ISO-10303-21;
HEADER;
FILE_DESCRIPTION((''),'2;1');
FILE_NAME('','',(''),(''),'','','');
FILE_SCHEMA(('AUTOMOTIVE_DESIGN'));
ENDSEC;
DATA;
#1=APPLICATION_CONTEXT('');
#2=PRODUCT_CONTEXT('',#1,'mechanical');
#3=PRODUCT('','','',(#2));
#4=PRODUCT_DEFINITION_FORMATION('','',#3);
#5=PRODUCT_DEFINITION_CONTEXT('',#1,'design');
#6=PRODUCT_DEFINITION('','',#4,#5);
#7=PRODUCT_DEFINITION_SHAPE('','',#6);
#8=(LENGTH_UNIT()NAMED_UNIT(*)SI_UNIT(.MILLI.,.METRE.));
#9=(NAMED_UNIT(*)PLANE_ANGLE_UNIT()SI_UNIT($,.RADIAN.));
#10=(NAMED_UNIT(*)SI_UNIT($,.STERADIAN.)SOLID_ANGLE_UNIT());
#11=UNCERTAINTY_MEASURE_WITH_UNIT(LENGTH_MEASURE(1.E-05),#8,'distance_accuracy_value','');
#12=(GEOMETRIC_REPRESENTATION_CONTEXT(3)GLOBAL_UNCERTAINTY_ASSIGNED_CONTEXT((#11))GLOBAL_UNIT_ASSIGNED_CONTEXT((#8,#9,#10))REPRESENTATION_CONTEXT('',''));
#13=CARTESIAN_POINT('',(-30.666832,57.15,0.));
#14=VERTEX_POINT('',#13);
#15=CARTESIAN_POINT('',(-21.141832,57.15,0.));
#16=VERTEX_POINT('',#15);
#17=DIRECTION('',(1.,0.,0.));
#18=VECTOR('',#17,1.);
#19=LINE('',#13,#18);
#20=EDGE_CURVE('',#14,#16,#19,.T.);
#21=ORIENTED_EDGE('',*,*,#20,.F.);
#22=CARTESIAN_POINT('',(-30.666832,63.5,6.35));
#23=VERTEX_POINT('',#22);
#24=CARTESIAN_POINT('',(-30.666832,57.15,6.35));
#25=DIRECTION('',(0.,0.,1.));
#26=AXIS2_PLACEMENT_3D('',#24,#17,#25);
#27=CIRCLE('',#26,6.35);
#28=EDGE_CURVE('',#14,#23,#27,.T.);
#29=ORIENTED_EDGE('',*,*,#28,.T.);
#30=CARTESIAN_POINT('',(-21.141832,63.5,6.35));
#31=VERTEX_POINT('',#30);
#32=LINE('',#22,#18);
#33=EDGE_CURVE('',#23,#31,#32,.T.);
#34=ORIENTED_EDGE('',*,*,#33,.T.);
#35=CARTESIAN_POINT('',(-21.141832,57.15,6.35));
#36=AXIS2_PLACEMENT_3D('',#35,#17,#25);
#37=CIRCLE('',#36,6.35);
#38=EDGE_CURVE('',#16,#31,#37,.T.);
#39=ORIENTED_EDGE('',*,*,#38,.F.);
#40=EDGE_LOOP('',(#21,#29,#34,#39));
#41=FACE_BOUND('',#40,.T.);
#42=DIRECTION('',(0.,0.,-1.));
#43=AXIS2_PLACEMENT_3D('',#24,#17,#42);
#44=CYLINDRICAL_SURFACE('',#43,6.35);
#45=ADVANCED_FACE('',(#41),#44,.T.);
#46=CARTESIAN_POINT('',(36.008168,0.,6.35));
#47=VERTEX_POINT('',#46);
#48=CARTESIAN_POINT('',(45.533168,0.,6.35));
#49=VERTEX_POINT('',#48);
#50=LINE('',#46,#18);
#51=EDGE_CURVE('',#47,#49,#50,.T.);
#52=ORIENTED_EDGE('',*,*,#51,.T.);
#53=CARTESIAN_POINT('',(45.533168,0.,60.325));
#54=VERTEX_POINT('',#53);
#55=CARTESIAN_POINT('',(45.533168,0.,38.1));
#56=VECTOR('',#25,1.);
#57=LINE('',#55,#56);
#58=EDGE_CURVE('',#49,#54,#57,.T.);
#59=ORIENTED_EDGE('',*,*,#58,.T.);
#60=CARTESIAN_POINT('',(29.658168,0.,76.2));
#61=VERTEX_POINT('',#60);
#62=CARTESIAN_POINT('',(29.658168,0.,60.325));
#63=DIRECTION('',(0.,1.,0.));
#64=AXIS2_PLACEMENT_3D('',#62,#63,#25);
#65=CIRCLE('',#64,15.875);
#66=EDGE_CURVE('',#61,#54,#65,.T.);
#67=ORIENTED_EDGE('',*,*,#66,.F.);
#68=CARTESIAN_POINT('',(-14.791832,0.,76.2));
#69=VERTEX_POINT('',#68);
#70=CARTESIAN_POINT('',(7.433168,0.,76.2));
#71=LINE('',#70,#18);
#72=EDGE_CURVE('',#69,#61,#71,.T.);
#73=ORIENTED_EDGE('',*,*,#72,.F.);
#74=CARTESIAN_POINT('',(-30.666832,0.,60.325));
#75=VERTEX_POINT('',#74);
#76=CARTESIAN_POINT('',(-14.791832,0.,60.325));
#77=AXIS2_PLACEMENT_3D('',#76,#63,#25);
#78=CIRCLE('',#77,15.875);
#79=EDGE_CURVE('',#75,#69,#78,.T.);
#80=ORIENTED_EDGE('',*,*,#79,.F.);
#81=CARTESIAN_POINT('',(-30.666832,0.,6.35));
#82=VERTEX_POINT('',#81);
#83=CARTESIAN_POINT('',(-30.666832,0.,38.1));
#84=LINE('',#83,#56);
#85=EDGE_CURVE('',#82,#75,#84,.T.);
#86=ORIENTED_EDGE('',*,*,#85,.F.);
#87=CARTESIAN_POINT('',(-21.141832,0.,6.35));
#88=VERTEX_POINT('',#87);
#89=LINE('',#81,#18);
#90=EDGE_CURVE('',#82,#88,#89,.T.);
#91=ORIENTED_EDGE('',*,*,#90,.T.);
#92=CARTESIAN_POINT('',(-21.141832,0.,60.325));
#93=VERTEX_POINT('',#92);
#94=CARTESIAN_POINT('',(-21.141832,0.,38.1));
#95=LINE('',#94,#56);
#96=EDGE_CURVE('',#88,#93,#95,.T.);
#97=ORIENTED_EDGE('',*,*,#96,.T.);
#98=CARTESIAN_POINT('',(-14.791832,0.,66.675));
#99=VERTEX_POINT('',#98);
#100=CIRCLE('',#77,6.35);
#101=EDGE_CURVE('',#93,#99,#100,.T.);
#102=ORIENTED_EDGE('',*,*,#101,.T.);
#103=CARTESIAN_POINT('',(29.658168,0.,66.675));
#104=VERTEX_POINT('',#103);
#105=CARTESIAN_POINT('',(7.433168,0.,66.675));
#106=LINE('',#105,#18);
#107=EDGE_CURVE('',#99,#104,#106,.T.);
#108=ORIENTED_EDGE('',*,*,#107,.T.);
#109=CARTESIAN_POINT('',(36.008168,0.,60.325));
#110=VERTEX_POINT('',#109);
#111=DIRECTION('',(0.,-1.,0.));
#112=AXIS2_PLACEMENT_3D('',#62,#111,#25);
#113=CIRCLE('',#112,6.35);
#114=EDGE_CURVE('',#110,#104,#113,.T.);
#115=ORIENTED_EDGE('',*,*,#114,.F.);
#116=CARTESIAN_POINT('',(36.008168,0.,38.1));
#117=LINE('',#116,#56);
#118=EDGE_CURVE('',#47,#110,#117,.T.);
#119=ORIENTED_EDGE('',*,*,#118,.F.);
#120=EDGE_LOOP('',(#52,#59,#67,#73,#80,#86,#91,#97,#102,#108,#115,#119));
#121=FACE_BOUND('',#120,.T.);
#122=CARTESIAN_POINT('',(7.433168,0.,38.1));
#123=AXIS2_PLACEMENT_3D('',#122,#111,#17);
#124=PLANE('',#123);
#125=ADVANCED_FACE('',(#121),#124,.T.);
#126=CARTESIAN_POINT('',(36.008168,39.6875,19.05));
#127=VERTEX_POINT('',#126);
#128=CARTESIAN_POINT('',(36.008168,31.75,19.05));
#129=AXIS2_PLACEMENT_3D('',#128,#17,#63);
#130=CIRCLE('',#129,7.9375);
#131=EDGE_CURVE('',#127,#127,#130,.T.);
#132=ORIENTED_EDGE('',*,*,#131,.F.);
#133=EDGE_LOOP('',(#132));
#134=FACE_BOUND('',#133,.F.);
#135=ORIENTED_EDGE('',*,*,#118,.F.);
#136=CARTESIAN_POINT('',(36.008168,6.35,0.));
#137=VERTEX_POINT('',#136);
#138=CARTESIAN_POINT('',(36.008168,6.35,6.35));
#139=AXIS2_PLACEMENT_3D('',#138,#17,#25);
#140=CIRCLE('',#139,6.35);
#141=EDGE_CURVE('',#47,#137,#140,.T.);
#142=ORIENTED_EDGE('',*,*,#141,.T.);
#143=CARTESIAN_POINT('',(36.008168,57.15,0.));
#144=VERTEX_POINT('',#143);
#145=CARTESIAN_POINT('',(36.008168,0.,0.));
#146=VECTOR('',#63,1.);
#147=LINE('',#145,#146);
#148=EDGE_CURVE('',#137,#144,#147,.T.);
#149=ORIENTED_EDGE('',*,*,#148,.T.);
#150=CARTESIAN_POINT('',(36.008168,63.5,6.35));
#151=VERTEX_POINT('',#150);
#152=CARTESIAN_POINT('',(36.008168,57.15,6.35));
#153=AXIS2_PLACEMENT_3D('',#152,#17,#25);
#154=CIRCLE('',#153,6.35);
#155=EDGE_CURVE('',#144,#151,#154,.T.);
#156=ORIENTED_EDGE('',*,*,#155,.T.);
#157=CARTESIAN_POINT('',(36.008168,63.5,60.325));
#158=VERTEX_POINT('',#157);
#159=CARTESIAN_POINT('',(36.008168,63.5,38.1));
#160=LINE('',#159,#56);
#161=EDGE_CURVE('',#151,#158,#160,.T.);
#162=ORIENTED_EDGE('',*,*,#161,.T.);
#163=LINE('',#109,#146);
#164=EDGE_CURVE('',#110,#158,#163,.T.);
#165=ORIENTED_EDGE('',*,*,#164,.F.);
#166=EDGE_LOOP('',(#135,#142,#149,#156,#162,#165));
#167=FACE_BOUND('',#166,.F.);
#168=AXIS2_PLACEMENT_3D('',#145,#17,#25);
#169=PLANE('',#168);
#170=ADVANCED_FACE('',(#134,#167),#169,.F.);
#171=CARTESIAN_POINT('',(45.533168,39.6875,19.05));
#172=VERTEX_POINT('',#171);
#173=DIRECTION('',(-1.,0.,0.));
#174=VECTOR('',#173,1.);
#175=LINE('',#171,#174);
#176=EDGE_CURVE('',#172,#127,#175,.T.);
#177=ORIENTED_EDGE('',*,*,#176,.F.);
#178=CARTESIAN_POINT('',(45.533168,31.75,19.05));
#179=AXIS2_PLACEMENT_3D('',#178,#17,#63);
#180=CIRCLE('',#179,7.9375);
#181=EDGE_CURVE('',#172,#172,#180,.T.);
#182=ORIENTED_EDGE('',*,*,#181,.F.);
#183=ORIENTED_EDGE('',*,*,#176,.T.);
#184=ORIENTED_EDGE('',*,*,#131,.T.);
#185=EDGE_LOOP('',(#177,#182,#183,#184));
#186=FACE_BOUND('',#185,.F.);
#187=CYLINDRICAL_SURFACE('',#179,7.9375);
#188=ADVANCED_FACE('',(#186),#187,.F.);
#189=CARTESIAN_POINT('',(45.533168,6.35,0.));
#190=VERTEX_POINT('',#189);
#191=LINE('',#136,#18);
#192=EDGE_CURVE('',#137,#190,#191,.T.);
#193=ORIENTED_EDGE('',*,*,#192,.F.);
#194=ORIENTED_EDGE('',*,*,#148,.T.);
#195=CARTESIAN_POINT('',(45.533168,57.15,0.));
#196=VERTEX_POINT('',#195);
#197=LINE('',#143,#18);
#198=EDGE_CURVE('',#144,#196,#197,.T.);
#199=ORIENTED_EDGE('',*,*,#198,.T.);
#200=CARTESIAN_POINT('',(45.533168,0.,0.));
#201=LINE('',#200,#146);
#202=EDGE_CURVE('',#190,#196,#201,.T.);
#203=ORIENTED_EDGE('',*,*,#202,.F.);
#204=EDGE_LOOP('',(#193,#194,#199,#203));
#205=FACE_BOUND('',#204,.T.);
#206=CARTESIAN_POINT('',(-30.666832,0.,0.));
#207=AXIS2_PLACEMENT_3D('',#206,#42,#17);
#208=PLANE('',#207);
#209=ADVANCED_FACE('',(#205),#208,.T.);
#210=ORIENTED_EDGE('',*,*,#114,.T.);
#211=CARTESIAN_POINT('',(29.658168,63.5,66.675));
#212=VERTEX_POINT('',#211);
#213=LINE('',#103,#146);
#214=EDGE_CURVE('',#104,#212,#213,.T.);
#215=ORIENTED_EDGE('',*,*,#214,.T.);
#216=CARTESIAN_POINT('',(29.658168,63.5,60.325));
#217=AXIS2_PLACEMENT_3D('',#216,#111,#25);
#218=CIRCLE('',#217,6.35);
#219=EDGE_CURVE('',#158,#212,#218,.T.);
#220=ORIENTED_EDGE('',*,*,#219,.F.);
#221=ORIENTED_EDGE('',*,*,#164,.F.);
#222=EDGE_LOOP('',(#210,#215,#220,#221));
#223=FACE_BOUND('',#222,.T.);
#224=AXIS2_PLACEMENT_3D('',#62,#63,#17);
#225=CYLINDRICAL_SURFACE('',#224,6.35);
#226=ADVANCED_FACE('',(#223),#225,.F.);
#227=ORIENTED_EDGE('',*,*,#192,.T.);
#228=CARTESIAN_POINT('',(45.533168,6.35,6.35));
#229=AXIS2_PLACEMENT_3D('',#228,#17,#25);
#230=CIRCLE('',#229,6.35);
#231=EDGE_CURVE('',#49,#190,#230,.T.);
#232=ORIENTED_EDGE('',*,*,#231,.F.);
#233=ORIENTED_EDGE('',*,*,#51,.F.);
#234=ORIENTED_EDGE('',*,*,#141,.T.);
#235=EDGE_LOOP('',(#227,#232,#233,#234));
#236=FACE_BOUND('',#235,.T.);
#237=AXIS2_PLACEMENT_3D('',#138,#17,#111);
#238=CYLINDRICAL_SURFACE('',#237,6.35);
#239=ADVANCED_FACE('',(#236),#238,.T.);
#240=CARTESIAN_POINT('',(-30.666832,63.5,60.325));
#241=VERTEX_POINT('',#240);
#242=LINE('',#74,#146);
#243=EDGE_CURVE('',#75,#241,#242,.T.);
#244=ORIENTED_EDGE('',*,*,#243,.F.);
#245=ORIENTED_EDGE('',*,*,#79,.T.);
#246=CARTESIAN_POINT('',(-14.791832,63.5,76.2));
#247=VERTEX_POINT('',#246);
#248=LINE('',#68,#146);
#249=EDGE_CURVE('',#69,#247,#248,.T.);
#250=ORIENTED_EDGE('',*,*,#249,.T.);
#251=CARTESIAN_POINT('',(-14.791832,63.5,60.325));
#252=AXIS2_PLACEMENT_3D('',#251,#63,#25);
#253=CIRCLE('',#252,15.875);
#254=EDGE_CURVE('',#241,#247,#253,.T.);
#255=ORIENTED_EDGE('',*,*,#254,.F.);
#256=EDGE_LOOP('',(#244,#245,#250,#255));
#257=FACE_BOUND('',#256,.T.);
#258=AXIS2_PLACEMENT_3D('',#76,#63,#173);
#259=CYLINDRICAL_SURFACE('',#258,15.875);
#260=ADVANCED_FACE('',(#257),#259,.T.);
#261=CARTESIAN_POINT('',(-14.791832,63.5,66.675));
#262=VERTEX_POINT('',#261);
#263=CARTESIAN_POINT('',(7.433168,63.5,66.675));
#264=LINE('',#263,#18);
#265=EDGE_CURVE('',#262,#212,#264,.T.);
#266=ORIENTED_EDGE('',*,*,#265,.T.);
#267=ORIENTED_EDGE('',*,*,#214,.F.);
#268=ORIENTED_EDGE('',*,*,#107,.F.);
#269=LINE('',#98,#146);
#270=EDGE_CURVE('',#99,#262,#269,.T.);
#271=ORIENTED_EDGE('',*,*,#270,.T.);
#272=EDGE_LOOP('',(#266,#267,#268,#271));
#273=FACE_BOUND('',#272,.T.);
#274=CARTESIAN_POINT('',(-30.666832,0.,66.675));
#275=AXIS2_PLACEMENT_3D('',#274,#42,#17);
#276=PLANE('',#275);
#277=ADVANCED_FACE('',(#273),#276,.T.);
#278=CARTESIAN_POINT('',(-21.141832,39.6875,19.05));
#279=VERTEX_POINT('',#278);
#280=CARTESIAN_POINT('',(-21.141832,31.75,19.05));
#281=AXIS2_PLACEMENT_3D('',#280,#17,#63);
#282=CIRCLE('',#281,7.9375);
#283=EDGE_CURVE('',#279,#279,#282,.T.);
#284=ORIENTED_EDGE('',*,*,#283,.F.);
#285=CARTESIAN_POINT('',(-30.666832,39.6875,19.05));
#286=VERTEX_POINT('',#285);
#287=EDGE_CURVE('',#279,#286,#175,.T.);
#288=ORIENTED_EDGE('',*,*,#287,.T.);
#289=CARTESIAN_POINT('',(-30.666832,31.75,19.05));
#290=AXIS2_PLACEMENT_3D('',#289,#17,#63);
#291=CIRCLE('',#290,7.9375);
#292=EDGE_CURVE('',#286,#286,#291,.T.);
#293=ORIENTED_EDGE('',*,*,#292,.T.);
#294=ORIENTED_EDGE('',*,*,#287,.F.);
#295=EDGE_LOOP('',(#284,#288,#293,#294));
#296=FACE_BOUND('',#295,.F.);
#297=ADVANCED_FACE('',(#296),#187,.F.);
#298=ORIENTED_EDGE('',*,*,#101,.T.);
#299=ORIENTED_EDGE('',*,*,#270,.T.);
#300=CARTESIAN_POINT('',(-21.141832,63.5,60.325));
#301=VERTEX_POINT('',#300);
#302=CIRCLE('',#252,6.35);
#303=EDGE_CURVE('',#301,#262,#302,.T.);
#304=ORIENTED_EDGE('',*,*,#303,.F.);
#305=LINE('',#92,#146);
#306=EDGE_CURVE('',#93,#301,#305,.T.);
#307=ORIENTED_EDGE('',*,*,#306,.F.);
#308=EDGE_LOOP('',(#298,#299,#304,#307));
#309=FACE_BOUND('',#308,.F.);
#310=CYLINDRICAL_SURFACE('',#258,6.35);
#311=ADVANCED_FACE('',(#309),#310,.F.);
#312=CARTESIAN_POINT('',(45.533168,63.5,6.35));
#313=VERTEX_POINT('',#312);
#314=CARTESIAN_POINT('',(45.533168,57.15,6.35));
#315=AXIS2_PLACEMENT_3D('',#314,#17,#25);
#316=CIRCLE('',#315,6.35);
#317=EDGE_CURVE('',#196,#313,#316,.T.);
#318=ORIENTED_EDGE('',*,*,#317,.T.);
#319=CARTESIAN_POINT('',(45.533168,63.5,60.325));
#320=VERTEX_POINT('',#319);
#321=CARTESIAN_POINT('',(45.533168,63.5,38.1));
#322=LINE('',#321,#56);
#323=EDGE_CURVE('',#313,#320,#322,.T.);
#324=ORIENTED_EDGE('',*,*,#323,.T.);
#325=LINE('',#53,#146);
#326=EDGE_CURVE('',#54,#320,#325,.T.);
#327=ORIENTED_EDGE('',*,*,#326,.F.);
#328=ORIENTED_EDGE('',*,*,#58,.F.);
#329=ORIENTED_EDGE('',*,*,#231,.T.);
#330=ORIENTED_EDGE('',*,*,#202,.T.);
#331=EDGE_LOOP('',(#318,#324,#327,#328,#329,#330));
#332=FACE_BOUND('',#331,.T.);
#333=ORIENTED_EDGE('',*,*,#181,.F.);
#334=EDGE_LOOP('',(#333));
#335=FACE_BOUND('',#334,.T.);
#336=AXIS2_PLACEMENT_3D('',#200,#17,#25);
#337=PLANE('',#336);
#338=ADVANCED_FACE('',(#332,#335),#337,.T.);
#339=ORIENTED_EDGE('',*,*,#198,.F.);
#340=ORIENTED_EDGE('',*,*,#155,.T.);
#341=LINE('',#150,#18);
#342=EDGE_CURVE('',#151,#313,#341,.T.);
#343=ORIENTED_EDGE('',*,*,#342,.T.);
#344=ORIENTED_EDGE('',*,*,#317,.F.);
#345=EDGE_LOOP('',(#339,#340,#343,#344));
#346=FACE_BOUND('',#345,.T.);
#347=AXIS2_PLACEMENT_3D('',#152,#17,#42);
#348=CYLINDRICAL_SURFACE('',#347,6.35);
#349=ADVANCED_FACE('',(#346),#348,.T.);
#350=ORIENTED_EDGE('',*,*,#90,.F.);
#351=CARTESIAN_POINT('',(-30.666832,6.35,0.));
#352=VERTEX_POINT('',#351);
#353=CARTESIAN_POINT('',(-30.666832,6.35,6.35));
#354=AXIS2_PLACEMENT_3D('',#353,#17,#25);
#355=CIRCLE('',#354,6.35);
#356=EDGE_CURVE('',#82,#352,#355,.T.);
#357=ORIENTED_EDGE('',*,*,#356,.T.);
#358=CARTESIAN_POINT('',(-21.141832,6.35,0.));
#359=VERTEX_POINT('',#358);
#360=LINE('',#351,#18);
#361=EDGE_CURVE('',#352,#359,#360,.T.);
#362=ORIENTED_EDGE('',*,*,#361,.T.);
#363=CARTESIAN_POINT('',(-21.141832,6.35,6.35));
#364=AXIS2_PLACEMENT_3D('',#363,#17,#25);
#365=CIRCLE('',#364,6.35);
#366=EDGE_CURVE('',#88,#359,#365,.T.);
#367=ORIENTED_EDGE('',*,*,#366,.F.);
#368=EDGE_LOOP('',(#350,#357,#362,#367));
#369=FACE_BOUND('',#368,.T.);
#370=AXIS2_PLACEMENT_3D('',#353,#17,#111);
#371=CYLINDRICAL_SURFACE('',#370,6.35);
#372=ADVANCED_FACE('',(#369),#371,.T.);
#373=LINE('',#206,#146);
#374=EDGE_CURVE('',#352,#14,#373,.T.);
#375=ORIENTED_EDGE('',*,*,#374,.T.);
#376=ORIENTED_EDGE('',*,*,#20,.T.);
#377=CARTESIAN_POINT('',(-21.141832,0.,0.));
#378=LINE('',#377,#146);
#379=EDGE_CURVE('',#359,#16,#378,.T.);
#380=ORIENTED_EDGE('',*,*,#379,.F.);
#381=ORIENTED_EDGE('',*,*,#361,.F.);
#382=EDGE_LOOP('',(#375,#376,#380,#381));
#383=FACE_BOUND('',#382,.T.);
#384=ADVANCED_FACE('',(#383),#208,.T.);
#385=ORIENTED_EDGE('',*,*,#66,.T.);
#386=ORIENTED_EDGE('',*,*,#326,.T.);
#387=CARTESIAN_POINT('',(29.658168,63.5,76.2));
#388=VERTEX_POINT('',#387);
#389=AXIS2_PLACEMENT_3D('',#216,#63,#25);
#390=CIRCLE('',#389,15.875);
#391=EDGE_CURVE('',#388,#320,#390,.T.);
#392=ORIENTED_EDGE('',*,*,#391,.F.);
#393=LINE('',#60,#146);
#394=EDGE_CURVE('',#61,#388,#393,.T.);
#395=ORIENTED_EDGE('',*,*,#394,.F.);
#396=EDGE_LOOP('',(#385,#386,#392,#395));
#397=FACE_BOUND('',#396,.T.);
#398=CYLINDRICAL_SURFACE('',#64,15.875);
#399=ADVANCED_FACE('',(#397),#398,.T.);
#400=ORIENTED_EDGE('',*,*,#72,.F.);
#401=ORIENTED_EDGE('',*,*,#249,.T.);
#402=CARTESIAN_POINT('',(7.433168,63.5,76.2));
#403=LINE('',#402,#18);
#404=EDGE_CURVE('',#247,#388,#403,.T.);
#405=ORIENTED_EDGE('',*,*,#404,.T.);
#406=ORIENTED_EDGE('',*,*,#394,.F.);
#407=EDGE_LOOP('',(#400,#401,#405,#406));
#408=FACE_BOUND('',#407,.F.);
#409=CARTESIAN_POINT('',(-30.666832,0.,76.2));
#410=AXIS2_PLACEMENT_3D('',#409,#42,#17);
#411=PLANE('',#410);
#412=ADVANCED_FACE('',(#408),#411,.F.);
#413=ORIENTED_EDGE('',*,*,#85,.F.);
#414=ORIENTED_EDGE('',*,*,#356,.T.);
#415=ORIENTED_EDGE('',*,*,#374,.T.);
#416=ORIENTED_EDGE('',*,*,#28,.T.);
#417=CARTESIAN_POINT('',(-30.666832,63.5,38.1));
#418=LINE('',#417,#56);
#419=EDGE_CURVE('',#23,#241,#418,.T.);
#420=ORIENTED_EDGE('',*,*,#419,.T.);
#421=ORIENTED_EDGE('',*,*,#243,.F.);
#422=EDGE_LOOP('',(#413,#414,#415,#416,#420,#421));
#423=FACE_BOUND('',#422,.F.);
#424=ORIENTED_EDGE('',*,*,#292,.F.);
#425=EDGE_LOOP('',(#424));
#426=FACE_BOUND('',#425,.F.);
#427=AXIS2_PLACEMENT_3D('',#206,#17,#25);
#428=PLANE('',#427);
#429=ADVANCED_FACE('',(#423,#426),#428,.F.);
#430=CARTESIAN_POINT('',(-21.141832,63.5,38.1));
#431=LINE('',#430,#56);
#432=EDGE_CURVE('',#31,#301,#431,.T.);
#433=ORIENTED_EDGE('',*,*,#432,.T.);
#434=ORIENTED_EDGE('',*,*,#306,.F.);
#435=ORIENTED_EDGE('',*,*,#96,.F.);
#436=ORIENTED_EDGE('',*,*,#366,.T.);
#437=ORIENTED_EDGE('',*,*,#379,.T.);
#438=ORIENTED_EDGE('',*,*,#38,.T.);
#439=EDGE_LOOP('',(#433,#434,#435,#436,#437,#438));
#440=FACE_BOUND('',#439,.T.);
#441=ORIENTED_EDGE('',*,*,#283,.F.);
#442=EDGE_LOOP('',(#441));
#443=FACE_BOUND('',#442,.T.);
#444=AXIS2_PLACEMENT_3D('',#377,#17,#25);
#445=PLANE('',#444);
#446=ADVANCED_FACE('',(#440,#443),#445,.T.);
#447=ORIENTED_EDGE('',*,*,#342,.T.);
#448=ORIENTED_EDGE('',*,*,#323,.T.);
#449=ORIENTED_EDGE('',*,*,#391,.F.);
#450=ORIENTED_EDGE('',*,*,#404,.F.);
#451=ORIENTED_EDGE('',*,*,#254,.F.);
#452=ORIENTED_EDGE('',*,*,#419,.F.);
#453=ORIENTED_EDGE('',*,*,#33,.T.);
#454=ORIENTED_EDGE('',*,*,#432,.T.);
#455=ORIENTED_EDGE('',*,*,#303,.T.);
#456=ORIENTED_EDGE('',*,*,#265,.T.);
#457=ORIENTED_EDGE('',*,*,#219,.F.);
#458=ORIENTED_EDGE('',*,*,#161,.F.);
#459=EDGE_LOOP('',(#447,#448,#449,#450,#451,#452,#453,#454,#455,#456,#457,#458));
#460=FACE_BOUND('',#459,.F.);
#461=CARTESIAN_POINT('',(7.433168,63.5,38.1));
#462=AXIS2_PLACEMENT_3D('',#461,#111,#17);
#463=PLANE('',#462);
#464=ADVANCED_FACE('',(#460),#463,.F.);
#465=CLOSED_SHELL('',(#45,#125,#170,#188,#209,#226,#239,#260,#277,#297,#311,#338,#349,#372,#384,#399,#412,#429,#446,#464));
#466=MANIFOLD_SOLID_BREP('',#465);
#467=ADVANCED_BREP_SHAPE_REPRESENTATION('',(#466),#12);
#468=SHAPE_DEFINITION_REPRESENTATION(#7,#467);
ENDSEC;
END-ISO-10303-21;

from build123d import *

# Parameters (mm, degrees)
F0_W     = 76.2
F0_H     = 76.2
F1_DEPTH = 63.5
F2_T     = -9.525
F3_R     = 6.35
F4_R     = 15.875
F5_R     = 7.9375
F6_DEPTH = 76.201
F7_R     = 6.35


with BuildPart() as f1:
    # F0 (on Front) → F1 (new body)
    with BuildSketch(Plane.XZ):
        with Locations((7.4331681192, 38.1)):
            Rectangle(F0_W, F0_H)
    extrude(amount=-F1_DEPTH)

    # F2
    f2_openings = [f1.faces().sort_by_distance(p)[0] for p in [
        (7.433168, 0, 38.1),
        (7.433168, 31.75, 0),
        (7.433168, 63.5, 38.1),
    ]]
    offset(amount=F2_T, openings=f2_openings)

    # F3
    f3_edges = [f1.edges().sort_by_distance(p)[0] for p in [
        (-21.141832, 31.75, 66.675),
        (36.008168, 31.75, 66.675),
    ]]
    fillet(f3_edges, radius=F3_R)

    # F4
    f4_edges = [f1.edges().sort_by_distance(p)[0] for p in [
        (-30.666832, 31.75, 76.2),
        (45.533168, 31.75, 76.2),
    ]]
    fillet(f4_edges, radius=F4_R)

    # F5 (on face) → F6 (cut, through all)
    with BuildSketch(Plane.YZ.offset(45.5331681192)):
        with Locations((31.75, 19.05)):
            Circle(F5_R)
    extrude(amount=-F6_DEPTH, mode=Mode.SUBTRACT)

    # F7
    f7_edges = [f1.edges().sort_by_distance(p)[0] for p in [
        (-25.904332, 0, 0),
        (40.770668, 0, 0),
        (-25.904332, 63.5, 0),
        (40.770668, 63.5, 0),
    ]]
    fillet(f7_edges, radius=F7_R)


solid = f1.part
